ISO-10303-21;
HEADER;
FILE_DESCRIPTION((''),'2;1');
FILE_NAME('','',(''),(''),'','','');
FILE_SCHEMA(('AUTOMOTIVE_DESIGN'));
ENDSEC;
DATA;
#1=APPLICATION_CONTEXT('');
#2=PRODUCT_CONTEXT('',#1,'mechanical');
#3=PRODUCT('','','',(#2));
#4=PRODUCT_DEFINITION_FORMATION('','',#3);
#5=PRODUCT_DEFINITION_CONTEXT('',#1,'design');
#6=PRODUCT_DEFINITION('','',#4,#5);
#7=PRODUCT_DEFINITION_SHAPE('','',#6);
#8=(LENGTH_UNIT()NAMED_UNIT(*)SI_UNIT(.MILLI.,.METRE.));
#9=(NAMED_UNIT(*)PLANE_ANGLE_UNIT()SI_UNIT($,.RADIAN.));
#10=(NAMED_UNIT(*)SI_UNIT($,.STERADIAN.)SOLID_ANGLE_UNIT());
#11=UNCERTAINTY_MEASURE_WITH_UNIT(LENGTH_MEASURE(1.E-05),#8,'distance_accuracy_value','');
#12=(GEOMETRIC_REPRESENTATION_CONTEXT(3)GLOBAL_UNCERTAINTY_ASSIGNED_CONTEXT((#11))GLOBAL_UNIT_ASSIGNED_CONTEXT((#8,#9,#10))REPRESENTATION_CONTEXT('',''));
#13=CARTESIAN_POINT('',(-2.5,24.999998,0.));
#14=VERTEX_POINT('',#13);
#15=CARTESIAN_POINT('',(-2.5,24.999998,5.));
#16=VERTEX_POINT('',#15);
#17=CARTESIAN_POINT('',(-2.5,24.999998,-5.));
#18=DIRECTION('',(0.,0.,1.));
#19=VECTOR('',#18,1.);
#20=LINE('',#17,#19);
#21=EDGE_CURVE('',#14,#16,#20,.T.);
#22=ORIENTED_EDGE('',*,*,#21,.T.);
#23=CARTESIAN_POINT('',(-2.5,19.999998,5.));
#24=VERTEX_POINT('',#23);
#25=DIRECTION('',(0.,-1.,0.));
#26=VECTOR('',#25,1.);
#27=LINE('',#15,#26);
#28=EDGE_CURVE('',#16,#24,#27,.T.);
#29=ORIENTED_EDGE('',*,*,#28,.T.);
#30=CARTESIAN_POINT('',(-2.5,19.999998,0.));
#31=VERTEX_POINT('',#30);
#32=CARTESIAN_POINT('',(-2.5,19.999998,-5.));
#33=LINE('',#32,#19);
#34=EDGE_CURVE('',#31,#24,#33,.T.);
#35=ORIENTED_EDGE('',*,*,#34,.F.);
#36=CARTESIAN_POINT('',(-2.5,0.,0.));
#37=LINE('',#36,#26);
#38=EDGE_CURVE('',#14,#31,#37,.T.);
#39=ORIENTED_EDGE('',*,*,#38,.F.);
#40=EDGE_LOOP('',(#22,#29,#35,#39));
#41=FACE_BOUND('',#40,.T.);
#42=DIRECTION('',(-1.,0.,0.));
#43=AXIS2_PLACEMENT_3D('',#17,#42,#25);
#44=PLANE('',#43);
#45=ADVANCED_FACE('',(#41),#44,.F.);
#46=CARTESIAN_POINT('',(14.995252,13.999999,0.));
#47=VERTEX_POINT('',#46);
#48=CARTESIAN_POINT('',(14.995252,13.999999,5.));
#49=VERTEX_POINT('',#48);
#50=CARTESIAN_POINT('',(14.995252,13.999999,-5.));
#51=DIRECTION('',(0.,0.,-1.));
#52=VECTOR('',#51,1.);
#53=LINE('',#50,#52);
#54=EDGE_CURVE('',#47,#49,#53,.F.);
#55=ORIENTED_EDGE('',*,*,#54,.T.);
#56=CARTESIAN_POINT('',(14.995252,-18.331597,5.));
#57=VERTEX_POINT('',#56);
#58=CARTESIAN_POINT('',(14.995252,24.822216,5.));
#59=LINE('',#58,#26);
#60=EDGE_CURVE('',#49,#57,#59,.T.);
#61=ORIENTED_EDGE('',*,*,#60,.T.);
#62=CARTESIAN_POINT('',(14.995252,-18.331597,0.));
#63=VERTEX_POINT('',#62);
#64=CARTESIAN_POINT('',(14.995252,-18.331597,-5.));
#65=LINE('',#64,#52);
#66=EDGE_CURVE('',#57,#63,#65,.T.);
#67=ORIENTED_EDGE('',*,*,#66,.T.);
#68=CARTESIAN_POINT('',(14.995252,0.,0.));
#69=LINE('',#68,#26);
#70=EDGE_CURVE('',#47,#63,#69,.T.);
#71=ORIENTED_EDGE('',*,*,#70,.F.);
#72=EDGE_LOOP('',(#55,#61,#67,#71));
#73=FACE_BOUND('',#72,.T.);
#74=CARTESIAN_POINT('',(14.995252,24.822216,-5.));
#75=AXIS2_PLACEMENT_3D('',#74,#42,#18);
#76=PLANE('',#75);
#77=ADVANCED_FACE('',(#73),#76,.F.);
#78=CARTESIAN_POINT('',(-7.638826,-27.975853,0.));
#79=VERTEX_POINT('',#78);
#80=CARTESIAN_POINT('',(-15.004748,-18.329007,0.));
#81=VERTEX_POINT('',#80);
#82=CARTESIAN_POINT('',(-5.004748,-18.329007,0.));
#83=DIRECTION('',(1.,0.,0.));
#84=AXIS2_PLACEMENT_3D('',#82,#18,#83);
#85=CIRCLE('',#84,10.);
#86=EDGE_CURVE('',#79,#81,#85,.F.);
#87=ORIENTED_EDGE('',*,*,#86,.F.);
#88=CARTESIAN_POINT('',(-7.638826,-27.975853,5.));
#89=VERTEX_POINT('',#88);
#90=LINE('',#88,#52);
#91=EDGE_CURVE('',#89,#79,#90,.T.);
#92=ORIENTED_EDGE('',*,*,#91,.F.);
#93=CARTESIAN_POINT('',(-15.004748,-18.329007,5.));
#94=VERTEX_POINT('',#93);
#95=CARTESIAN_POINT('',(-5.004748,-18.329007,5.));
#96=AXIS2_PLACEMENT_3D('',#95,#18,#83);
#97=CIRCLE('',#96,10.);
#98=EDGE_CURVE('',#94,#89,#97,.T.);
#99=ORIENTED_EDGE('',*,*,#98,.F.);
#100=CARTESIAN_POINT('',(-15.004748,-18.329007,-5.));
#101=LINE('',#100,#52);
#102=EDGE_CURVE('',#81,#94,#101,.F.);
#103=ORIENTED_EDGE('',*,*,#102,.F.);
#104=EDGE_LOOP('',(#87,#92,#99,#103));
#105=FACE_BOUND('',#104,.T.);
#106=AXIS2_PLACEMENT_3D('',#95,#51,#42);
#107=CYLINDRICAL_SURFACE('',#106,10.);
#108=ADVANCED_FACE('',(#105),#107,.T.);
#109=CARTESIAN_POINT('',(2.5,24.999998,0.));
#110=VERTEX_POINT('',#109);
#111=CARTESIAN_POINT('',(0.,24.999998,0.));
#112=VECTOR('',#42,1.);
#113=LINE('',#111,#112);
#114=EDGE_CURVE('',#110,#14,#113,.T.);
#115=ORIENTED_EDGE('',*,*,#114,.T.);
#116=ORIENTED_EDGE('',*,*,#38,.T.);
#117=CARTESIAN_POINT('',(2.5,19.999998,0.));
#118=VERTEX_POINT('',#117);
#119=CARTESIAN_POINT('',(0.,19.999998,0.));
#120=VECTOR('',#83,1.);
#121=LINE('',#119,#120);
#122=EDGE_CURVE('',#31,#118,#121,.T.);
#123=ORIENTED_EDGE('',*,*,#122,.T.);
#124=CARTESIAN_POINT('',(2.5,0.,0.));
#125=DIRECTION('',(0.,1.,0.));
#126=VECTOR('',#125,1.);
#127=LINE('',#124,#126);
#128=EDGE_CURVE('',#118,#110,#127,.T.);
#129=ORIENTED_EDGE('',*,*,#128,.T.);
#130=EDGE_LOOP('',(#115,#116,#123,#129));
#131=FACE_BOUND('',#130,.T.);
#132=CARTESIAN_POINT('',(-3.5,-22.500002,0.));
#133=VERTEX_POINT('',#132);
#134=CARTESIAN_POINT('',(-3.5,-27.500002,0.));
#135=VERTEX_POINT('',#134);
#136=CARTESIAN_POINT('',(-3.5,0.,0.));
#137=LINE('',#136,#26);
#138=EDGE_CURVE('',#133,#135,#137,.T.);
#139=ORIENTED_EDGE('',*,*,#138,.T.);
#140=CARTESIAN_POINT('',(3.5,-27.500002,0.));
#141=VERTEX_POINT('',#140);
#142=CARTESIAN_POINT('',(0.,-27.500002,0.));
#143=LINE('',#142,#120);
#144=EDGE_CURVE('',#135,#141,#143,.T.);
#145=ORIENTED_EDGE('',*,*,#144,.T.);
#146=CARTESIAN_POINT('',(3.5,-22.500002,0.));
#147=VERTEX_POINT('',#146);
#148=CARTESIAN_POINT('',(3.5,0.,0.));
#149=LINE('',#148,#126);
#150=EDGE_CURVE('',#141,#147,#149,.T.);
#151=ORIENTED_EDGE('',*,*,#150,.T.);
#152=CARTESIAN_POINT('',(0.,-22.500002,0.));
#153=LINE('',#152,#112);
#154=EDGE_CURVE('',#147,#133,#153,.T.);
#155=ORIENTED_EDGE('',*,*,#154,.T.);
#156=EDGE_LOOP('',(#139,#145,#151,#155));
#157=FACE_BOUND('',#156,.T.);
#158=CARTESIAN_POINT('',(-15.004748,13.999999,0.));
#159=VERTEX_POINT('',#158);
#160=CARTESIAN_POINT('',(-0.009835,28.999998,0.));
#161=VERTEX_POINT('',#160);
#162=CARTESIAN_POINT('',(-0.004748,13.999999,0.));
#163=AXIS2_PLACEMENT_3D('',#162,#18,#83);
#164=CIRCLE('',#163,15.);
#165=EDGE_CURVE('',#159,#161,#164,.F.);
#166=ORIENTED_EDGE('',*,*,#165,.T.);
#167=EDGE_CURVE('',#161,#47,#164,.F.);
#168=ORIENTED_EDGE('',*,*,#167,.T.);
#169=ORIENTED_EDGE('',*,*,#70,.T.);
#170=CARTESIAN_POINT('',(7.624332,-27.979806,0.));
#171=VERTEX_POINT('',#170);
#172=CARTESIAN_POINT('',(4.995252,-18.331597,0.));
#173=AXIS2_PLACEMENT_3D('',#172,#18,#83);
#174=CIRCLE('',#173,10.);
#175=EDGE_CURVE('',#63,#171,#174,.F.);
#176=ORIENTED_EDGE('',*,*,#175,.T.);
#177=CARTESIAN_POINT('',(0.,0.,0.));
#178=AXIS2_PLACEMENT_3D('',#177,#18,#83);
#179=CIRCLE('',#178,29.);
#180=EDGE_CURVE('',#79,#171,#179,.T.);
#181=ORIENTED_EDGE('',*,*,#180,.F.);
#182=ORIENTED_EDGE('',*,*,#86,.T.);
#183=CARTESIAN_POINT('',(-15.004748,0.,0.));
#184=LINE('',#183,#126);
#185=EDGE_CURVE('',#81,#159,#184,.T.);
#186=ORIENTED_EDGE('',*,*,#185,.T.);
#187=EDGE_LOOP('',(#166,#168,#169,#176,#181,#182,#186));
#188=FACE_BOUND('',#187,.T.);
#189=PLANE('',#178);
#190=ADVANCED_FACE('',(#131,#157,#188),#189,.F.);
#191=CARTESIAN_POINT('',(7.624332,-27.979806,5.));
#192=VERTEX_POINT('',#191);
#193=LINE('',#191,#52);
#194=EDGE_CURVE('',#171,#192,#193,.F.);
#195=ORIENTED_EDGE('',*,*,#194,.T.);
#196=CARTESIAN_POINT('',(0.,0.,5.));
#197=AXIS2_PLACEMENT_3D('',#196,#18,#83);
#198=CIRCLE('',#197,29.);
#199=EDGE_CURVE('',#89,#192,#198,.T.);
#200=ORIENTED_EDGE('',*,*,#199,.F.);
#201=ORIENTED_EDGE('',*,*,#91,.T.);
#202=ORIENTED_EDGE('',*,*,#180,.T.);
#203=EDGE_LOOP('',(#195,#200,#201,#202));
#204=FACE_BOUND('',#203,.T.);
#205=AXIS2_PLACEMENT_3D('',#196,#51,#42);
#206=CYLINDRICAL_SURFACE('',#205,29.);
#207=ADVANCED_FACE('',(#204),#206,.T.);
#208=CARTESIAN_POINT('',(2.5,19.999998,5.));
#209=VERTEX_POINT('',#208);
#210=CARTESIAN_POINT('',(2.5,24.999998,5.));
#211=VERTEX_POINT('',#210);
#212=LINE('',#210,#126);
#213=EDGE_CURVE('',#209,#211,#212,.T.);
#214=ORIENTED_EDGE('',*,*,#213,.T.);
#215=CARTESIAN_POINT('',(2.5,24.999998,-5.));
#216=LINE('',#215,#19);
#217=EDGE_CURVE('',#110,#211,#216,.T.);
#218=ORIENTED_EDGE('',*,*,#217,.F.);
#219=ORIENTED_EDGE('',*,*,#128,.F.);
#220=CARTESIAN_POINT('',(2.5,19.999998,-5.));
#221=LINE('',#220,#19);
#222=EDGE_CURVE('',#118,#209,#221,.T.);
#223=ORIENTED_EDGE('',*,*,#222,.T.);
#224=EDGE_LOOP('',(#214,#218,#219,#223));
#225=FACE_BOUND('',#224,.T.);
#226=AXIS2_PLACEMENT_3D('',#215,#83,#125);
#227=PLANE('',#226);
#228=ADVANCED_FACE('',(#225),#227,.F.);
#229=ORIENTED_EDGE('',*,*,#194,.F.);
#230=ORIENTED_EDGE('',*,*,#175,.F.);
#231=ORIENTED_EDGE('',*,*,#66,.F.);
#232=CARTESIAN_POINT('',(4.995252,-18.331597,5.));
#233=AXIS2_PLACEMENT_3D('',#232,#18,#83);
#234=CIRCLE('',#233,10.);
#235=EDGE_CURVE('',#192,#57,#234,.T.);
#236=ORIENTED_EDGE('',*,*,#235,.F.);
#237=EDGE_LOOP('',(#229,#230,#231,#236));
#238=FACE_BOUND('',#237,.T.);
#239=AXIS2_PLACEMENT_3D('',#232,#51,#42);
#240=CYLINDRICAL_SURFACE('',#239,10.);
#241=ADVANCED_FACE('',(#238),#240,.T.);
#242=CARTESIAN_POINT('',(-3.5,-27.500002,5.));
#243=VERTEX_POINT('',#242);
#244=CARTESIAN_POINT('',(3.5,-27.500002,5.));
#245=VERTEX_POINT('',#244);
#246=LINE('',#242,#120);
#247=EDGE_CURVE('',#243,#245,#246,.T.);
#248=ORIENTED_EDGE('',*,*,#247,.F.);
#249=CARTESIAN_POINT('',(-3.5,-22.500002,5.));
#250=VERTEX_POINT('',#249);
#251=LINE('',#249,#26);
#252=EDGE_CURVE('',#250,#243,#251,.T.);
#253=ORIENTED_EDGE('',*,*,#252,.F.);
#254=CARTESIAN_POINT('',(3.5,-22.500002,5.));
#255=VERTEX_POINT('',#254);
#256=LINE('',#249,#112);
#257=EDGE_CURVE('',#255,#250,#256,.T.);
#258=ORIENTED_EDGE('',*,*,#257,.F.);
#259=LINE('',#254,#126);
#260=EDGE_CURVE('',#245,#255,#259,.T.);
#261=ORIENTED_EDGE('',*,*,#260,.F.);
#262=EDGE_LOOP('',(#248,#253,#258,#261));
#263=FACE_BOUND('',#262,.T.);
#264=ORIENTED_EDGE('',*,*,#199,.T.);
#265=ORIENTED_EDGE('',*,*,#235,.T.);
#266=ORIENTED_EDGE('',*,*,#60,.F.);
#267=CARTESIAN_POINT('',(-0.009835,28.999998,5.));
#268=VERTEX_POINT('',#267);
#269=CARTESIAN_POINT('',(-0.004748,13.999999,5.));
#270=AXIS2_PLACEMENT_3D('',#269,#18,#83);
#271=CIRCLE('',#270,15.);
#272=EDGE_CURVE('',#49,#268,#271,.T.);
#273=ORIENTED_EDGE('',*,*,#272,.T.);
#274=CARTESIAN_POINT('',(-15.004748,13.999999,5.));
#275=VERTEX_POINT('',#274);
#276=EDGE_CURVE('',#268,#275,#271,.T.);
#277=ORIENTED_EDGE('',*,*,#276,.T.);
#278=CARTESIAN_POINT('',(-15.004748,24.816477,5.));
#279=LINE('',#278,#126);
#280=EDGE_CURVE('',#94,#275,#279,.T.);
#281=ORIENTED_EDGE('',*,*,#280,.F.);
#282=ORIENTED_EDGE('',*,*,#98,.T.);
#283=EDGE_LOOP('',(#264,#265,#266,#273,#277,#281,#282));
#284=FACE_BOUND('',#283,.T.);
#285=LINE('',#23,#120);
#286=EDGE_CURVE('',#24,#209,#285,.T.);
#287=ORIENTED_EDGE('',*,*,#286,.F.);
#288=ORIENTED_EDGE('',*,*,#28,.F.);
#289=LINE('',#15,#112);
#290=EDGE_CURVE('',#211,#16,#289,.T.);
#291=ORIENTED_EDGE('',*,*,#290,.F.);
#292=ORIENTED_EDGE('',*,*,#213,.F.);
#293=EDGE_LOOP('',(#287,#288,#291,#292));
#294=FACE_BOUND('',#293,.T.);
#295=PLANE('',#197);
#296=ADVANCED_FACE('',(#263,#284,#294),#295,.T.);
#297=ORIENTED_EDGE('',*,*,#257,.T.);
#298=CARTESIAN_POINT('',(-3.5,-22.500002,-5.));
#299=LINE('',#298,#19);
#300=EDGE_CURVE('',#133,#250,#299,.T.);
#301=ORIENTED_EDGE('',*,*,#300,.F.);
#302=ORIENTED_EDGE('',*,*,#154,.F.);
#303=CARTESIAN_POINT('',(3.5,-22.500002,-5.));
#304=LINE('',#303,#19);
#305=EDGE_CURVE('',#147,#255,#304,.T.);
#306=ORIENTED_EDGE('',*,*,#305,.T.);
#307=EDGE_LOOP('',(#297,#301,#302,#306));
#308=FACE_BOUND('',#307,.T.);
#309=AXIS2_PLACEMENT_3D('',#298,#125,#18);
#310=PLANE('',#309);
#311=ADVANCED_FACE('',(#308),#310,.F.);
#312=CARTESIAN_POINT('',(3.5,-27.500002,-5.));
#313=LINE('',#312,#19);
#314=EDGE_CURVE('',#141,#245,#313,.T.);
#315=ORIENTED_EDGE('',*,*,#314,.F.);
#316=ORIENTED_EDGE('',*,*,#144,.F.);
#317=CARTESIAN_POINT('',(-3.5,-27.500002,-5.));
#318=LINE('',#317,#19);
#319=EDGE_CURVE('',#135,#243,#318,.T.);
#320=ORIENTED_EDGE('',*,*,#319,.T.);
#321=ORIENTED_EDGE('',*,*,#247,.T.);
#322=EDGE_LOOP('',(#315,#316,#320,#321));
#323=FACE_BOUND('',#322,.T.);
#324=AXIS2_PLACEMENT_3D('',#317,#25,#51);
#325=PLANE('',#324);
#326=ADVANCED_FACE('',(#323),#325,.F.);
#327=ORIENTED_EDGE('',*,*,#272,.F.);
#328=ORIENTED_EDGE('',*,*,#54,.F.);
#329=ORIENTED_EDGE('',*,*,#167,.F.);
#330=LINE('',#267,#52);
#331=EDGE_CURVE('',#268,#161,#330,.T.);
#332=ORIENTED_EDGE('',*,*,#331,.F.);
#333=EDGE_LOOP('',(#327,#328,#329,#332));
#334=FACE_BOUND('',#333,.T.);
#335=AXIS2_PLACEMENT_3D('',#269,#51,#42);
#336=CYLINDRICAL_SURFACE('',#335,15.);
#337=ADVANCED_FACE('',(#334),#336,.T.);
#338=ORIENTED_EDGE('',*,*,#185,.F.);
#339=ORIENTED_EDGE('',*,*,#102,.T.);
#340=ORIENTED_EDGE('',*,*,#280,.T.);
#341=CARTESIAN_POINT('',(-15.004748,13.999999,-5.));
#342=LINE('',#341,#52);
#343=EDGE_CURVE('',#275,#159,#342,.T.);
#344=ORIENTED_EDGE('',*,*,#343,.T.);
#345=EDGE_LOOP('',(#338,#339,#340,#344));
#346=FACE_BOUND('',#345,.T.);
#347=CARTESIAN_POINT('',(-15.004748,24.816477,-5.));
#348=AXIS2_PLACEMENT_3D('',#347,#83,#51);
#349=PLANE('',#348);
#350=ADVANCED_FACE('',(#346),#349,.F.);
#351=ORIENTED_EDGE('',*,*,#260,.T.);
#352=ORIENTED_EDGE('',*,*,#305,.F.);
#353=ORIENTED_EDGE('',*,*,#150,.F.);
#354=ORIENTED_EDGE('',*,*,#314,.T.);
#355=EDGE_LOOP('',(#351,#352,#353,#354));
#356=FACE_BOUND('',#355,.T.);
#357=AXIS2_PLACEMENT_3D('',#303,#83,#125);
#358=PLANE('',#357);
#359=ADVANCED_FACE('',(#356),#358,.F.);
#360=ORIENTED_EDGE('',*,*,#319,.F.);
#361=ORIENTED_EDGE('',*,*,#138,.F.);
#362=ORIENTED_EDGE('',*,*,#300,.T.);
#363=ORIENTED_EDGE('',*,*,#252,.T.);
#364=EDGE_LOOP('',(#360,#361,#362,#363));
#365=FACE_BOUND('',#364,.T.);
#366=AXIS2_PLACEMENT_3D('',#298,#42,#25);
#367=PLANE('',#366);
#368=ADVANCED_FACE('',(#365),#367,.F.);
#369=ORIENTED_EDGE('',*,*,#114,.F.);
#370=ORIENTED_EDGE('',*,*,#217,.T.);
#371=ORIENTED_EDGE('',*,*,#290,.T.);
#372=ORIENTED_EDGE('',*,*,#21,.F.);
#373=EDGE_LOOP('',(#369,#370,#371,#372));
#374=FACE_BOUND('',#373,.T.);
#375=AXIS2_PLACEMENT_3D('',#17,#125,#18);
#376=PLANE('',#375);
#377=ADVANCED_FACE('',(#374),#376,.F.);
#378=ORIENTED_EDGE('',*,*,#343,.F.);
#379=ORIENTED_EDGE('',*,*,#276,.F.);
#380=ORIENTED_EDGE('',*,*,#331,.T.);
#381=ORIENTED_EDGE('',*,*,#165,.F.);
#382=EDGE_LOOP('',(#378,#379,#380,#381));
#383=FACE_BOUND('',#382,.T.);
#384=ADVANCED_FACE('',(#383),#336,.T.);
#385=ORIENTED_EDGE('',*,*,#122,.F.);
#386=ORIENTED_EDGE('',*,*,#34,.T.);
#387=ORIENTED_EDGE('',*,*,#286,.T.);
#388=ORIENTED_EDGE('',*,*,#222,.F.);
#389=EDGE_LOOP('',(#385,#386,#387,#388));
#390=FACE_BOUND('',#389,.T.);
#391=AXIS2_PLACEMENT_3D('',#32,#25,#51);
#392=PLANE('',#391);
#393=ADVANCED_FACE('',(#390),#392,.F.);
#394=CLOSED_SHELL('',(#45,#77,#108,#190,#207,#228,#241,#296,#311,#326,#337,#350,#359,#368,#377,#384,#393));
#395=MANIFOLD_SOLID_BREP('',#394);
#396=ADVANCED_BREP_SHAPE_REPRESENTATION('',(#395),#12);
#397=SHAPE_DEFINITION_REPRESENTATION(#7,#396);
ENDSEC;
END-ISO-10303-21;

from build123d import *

# Parameters (mm, degrees)
SKETCH1_R           = 29
BOSS_EXTRUDE1_DEPTH = 5
CUT_EXTRUDE3_START  = -10
CUT_EXTRUDE3_DEPTH  = 10
FILLET2_R           = 15
FILLET3_R           = 10
SKETCH7_W           = 5
SKETCH7_H           = 5
SKETCH7_W_2         = 7
CUT_EXTRUDE4_DEPTH  = 10


with BuildPart() as part:
    # Sketch1 → Boss-Extrude1 (new body)
    with BuildSketch(Plane.XY):
        Circle(SKETCH1_R)
    extrude(amount=BOSS_EXTRUDE1_DEPTH)

    # Sketch6 → Cut-Extrude3 (cut)
    with BuildSketch(Plane.XY.offset(5).offset(CUT_EXTRUDE3_START)):
        with BuildLine():
            Line((-15.004747761, 24.816477281), (-15.004747761, -24.816477281))
            ThreePointArc((-15.004747761, -24.816477281), (-29, 0), (-15.004747761, 24.816477281))
        make_face()
        with BuildLine():
            Line((14.995252239, 24.822216063), (14.995252239, -24.822216063))
            ThreePointArc((14.995252239, -24.822216063), (29, 0), (14.995252239, 24.822216063))
        make_face()
    extrude(amount=CUT_EXTRUDE3_DEPTH, mode=Mode.SUBTRACT)

    # Fillet2
    fillet2_edges = [part.edges().sort_by_distance(p)[0] for p in [
        (-15.004747761, 24.816477281, 2.5),
        (14.995252239, 24.822216063, 2.5),
    ]]
    fillet(fillet2_edges, radius=FILLET2_R - 0.0001)  # a hair under: the kernel refuses the full size

    # Fillet3
    fillet3_edges = [part.edges().sort_by_distance(p)[0] for p in [
        (-15.004747761, -24.816477281, 2.5),
        (14.995252239, -24.822216063, 2.5),
    ]]
    fillet(fillet3_edges, radius=FILLET3_R)

    # Sketch7 → Cut-Extrude4 (cut)
    with BuildSketch(Plane.XY.offset(5)):
        with Locations((0, 22.499998332)):
            Rectangle(SKETCH7_W, SKETCH7_H)
        with Locations((0, -25.000001668)):
            Rectangle(SKETCH7_W_2, SKETCH7_H)
    extrude(amount=-CUT_EXTRUDE4_DEPTH, mode=Mode.SUBTRACT)


solid = part.part
